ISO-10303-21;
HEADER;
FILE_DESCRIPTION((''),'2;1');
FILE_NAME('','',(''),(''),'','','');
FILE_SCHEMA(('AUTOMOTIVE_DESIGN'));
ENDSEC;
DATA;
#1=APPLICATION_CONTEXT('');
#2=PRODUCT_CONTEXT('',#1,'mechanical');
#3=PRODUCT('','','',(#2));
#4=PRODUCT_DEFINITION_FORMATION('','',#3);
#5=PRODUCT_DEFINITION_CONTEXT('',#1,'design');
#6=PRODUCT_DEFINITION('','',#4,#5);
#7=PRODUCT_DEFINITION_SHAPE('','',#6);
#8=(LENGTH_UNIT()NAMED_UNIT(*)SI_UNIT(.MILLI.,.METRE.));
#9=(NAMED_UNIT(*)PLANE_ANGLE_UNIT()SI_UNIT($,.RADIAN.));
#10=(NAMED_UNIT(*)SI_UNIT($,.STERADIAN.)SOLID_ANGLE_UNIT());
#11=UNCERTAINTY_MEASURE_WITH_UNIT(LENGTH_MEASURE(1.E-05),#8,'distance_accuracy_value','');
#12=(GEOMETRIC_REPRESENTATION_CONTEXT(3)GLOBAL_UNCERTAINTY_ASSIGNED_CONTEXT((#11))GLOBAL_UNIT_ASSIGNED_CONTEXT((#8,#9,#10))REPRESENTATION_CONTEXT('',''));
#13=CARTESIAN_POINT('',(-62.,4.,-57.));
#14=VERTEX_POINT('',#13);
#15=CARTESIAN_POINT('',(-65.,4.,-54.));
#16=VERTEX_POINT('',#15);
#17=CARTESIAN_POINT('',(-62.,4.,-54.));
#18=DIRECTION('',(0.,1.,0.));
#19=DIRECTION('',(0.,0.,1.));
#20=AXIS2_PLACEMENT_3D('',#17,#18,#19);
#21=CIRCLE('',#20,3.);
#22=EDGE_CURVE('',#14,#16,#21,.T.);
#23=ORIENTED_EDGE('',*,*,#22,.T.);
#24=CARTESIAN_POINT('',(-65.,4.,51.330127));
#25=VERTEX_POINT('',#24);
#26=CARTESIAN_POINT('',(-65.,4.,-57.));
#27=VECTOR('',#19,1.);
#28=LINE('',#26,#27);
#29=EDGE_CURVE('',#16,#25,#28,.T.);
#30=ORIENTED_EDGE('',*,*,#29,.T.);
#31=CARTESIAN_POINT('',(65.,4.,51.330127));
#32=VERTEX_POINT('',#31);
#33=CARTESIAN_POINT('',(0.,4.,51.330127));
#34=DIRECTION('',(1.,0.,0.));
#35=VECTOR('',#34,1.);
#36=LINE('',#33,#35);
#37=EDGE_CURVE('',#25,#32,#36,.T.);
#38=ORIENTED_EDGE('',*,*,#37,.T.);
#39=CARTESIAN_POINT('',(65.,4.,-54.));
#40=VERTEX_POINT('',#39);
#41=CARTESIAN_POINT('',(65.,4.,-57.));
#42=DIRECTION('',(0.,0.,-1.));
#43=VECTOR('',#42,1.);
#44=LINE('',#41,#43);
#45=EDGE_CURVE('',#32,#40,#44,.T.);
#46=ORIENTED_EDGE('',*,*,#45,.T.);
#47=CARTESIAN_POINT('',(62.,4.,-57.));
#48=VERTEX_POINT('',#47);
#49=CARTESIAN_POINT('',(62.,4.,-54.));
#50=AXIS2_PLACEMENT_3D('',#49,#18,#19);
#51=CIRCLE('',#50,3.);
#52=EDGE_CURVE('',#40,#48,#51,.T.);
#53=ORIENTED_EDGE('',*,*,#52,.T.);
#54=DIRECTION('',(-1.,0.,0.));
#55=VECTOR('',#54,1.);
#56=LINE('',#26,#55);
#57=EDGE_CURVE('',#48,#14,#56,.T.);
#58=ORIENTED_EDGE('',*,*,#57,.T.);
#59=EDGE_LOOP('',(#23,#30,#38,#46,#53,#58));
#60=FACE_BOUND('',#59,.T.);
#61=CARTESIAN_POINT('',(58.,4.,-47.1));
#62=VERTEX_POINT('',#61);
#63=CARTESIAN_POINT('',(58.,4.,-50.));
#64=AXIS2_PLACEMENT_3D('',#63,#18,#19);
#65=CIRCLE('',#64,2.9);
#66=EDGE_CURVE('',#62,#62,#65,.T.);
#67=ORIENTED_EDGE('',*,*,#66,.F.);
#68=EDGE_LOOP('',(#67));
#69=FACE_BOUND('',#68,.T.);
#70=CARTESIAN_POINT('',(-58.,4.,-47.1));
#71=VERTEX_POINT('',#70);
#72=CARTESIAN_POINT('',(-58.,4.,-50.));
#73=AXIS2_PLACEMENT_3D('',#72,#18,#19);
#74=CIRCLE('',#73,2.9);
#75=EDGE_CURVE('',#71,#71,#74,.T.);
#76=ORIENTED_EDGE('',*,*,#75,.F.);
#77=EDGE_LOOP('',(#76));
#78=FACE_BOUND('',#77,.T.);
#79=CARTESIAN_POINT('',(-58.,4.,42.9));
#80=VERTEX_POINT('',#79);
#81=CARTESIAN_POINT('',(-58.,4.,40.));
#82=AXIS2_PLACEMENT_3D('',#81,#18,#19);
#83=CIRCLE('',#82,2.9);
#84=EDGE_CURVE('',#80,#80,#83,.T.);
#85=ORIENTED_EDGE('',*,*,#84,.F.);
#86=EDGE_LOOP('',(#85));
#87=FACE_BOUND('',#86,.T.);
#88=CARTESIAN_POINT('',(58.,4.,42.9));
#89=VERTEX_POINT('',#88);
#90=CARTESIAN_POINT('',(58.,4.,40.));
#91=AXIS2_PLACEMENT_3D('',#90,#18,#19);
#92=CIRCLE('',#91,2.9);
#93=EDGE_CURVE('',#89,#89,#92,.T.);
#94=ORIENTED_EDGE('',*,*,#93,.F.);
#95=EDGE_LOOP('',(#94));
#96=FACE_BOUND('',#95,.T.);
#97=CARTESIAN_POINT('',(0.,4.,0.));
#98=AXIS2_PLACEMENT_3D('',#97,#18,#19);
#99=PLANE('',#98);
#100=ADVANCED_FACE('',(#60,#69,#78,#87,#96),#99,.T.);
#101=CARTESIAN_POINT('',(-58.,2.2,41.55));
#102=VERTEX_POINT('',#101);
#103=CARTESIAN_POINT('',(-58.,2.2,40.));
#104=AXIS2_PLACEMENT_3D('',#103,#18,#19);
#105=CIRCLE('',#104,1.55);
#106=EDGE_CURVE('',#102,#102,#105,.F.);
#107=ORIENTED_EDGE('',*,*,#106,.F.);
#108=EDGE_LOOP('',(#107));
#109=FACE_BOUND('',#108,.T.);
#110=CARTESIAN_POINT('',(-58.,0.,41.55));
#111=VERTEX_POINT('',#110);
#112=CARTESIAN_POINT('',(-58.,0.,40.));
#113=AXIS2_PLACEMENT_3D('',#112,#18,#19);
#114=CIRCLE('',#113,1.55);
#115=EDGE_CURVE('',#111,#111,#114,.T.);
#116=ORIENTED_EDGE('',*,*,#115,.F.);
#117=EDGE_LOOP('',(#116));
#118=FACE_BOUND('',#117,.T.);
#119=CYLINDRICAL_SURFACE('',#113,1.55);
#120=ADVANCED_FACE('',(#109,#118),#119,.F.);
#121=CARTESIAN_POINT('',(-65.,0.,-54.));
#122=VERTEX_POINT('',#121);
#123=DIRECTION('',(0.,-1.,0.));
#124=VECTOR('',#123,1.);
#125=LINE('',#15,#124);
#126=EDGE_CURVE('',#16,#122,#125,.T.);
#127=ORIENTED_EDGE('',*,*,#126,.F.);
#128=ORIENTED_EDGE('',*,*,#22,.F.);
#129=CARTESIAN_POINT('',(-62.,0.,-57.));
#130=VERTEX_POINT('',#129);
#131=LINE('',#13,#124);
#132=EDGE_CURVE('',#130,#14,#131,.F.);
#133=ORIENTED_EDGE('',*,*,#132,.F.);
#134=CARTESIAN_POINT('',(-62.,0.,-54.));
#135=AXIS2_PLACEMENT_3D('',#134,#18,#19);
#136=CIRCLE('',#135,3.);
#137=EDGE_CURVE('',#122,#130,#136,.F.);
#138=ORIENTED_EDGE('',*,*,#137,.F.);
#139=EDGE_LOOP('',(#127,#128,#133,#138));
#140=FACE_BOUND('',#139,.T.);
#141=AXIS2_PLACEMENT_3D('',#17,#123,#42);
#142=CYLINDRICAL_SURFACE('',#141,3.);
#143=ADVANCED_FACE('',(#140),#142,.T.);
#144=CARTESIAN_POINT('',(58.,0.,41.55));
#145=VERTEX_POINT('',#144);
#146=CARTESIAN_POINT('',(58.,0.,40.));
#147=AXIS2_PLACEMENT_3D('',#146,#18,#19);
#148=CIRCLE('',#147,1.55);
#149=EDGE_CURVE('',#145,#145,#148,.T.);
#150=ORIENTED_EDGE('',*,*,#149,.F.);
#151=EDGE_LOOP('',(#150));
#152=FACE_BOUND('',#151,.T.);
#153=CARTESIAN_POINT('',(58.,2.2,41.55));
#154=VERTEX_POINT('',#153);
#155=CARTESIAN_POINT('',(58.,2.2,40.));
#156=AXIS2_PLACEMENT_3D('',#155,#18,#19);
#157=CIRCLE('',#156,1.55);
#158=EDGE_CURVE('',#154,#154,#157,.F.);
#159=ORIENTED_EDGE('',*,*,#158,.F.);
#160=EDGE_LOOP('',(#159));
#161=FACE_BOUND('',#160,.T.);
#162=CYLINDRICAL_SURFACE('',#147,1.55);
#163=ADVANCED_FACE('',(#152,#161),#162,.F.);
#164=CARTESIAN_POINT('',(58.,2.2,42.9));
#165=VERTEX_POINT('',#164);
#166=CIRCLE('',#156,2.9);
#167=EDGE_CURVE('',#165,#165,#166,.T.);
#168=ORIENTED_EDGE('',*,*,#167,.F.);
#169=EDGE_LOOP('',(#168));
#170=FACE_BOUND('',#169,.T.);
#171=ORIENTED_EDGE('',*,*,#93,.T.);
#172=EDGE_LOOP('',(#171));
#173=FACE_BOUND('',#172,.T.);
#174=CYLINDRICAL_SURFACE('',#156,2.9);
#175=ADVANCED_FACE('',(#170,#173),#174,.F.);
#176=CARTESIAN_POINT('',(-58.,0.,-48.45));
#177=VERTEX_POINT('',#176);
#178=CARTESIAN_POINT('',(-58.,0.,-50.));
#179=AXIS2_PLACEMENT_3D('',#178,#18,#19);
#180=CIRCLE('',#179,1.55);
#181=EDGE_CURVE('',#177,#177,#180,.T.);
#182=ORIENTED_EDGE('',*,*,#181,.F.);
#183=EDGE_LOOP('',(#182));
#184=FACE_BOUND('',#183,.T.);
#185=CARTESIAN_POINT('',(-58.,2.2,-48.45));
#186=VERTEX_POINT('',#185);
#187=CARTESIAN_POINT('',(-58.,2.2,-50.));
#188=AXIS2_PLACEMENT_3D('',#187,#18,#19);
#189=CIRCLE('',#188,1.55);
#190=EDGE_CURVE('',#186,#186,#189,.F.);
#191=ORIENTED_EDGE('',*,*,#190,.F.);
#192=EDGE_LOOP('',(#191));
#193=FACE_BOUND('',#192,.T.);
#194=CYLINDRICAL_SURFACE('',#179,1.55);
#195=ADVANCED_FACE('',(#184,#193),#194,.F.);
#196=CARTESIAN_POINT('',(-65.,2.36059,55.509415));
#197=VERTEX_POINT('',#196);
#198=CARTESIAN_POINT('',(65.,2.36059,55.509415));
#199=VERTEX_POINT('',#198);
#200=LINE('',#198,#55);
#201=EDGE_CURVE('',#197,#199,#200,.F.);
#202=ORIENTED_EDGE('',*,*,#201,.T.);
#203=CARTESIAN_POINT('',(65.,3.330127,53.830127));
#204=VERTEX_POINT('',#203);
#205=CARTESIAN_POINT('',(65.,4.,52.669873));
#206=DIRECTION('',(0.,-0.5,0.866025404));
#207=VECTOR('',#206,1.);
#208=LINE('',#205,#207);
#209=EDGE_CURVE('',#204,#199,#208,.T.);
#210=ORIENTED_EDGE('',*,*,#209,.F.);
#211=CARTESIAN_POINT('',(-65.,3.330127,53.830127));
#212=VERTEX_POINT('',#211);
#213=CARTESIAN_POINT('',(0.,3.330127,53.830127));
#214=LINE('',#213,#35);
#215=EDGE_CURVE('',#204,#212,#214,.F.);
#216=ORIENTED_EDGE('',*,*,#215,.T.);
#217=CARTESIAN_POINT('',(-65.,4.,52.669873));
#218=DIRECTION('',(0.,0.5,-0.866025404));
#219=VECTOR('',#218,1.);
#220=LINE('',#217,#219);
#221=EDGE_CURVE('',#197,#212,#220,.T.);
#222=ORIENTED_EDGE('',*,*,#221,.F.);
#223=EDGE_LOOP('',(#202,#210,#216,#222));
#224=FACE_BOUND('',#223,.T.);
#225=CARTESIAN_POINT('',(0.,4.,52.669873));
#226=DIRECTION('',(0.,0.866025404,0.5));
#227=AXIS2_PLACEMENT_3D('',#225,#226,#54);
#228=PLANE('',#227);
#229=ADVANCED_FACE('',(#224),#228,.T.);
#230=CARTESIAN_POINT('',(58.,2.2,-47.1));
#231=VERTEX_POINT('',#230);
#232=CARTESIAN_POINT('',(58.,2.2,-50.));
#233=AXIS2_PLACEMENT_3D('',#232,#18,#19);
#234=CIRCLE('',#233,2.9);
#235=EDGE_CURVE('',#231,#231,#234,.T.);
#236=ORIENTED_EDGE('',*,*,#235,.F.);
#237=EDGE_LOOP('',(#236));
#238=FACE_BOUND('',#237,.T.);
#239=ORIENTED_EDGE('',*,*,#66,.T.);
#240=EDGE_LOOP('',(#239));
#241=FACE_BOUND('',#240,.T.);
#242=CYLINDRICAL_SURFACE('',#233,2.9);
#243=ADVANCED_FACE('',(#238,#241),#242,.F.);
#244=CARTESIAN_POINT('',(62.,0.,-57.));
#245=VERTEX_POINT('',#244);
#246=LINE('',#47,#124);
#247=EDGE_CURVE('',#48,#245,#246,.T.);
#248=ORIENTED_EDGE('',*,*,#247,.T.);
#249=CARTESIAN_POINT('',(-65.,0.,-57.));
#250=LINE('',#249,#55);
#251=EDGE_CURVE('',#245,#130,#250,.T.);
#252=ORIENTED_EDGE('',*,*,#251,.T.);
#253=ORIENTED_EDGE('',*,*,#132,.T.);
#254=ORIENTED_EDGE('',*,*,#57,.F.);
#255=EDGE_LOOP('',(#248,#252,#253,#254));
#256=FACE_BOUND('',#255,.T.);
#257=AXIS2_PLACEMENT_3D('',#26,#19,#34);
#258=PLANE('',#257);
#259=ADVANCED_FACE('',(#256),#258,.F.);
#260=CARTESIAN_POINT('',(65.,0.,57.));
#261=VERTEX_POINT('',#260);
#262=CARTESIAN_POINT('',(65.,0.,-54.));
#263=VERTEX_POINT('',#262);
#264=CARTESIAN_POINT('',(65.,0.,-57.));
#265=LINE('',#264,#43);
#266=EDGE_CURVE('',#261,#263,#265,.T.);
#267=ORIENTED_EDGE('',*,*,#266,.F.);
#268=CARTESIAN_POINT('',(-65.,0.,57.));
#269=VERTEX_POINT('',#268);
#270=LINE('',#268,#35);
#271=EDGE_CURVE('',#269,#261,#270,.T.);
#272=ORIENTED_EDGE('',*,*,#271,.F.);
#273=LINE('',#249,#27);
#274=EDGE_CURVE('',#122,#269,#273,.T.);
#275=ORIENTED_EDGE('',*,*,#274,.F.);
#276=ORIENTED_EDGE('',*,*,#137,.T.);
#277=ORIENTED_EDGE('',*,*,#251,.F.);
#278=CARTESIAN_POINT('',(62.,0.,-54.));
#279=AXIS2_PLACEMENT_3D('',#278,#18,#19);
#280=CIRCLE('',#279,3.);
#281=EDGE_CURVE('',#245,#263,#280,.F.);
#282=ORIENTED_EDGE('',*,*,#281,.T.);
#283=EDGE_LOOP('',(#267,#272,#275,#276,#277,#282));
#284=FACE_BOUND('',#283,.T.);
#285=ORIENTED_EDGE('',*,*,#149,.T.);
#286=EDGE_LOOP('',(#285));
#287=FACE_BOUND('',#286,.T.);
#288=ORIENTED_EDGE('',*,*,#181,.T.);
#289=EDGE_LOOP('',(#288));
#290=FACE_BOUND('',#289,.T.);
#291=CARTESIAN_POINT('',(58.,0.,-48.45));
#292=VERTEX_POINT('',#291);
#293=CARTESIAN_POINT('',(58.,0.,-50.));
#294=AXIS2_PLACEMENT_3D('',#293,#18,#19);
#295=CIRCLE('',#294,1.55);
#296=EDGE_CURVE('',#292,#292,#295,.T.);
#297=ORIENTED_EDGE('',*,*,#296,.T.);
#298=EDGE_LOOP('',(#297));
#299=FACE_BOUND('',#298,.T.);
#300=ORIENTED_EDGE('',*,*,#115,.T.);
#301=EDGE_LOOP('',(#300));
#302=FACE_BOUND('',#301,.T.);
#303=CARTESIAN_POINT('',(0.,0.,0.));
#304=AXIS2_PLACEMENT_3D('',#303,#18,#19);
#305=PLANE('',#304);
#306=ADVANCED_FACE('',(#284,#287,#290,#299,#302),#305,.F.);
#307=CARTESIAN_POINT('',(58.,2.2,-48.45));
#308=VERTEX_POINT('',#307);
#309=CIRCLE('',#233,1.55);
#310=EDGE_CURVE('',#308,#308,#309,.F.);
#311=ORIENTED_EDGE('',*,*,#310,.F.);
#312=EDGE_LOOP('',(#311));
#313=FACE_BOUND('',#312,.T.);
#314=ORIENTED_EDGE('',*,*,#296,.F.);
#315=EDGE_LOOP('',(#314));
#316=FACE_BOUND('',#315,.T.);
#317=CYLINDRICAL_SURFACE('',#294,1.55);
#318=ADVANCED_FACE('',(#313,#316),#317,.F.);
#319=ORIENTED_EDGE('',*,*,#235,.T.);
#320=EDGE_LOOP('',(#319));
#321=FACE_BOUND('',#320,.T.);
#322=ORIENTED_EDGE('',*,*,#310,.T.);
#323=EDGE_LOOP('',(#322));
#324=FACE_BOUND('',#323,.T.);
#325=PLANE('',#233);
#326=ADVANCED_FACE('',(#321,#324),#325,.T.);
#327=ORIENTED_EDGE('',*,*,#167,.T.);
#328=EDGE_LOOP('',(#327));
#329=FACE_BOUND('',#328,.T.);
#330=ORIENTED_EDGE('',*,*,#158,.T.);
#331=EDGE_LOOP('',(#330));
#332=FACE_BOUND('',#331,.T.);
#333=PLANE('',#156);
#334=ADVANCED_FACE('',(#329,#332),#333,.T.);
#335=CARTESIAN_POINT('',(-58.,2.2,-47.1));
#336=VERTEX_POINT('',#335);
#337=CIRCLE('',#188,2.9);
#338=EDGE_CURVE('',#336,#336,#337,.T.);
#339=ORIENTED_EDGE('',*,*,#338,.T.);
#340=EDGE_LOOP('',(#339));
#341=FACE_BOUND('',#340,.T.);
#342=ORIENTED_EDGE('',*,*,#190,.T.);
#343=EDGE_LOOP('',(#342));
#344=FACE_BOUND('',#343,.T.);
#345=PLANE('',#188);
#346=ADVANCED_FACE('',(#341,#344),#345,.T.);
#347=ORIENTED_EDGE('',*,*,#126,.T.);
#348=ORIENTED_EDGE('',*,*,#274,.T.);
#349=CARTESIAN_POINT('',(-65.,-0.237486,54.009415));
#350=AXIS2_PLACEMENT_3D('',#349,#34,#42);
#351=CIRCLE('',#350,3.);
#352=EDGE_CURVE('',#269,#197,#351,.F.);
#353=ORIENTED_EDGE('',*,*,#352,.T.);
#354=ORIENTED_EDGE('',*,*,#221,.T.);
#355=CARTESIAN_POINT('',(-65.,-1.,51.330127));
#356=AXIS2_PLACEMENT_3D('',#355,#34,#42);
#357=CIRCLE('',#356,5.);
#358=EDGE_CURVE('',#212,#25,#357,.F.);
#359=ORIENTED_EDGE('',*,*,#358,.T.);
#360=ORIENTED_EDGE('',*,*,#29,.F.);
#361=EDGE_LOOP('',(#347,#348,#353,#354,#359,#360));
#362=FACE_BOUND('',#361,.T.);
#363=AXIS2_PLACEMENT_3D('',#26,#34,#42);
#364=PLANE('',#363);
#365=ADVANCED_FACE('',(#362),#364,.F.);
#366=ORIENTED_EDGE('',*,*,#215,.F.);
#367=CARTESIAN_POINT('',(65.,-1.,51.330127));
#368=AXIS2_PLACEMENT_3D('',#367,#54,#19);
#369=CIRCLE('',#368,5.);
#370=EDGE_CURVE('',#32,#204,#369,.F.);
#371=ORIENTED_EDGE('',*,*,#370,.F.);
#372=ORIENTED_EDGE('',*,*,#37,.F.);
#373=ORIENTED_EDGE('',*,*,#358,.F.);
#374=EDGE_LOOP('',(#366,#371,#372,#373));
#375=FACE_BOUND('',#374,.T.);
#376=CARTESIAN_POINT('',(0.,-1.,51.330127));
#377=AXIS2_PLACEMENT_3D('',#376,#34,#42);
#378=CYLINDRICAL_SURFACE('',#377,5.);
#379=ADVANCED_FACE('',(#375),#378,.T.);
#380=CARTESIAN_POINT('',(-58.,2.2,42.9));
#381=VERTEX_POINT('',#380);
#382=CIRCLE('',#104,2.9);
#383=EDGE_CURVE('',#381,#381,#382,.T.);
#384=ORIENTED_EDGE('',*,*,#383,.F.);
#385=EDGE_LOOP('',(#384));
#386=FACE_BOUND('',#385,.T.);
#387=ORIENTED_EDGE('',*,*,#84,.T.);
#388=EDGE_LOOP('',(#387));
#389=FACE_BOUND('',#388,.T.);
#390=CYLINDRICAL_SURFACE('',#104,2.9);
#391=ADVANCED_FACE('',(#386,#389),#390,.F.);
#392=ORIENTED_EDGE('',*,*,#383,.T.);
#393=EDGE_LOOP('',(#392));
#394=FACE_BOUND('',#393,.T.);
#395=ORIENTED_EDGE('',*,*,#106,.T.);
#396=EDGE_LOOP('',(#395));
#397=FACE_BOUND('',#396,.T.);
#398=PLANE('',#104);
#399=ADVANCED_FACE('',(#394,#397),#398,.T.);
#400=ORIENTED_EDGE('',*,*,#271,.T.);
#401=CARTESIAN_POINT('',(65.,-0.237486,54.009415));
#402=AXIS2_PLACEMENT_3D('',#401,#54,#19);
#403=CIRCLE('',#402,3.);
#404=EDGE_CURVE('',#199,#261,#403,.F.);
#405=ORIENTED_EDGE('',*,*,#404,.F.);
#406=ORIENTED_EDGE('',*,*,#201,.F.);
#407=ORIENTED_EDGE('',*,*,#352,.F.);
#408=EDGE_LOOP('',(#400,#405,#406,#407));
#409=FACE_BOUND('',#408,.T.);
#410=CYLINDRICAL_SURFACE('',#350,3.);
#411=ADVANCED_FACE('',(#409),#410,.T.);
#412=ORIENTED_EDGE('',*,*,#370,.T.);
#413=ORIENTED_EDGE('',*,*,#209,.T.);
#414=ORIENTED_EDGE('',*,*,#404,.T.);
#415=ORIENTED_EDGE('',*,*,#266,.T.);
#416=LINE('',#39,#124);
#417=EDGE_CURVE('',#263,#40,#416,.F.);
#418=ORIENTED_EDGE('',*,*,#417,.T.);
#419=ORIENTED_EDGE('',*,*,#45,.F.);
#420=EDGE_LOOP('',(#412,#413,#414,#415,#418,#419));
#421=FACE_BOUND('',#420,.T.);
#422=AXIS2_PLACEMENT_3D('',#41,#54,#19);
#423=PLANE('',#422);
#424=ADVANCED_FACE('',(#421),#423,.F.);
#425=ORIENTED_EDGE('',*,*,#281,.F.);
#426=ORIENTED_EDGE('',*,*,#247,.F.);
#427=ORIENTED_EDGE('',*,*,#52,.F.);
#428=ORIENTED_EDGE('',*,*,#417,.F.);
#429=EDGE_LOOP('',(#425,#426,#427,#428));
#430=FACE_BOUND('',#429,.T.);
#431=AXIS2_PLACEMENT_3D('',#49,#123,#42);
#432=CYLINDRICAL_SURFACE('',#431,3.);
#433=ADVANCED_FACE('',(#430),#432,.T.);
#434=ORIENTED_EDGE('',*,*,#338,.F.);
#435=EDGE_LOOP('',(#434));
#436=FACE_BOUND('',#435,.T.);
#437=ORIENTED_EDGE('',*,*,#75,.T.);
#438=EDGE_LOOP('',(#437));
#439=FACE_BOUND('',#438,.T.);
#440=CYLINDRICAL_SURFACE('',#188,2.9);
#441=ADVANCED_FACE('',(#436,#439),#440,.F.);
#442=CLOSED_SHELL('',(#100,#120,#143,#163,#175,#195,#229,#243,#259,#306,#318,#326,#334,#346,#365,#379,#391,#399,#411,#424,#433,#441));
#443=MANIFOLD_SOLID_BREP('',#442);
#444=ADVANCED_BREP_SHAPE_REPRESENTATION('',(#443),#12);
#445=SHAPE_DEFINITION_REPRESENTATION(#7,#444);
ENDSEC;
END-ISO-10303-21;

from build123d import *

# Parameters (mm, degrees)
SKETCH_1_W                  = 130
SKETCH_1_H                  = 114
EXTRUDE_1_DEPTH             = 4
CHAMFER_1_SIZE              = 2.5
CHAMFER_1_SIZE2             = 4.330127019
FILLET_1_R                  = 5
FILLET_2_R                  = 3
FILLET_3_R                  = 3
SKETCH_2_R                  = 1.55
CUT_EXTRUDE_1_DEPTH         = 87.544786094
PATTERN_LINEAR_1_COUNT      = 2
PATTERN_LINEAR_1_PITCH      = 116
PATTERN_LINEAR_1_COUNT_DIR2 = 2
PATTERN_LINEAR_1_PITCH_DIR2 = 90
SKETCH_4_R                  = 2.9
CUT_EXTRUDE_2_DEPTH         = 1.8
PATTERN_LINEAR_2_COUNT      = 2
PATTERN_LINEAR_2_PITCH      = 116
PATTERN_LINEAR_2_COUNT_DIR2 = 2
PATTERN_LINEAR_2_PITCH_DIR2 = 90


with BuildPart() as part:
    # Эскиз1 → Бобышка-Вытянуть1 (new body)
    with BuildSketch(Plane(origin=(0, 0, 0), x_dir=(1, 0, 0), z_dir=(0, 1, 0))):
        Rectangle(SKETCH_1_W, SKETCH_1_H)
    extrude(amount=EXTRUDE_1_DEPTH)

    # Фаска1
    chamfer_1_edges = [part.edges().sort_by_distance(p)[0] for p in [
        (0, 4, 57),
    ]]
    chamfer_1_side = [part.faces().sort_by_distance(p)[0] for p in [
        (0, 2, 57),
    ]]
    chamfer(chamfer_1_edges, length=CHAMFER_1_SIZE, length2=CHAMFER_1_SIZE2, reference=chamfer_1_side[0])

    # Скругление1
    fillet_1_edges = [part.edges().sort_by_distance(p)[0] for p in [
        (0, 4, 52.669872981),
    ]]
    fillet(fillet_1_edges, radius=FILLET_1_R)

    # Скругление2
    # the kernel refuses this fillet: 3 mm, written as the material it takes off along each edge
    with BuildSketch(Plane(origin=(69.302949009, 1.5, 57), x_dir=(0, 0.4999999999999978, -0.8660254037844398), z_dir=(-1, 0, 0))) as fillet_2_piece_1:
        with BuildLine():
            CenterArc((1.721179604, 3), FILLET_2_R, 214.540406951, 55.459593049)
            Line((-0.75, 1.299038106), (-0.799423592, 1.265018868))
            ThreePointArc((-0.799423592, 1.265018868), (-0.426961524, 0.619519053), (-0.051961524, -0.03))
            Line((-0.051961524, -0.03), (0, -0.06))
            Line((0, -0.06), (1.721179604, -0.06))
            Line((1.721179604, -0.06), (1.721179604, 0))
        make_face()
    extrude(amount=138.605898019, mode=Mode.SUBTRACT)

    # Скругление3
    fillet_3_edges = [part.edges().sort_by_distance(p)[0] for p in [
        (-65, 2, -57),
        (65, 2, -57),
    ]]
    fillet(fillet_3_edges, radius=FILLET_3_R)

    # Эскиз2 → Вырез-Вытянуть1 (cut, through all)
    with BuildSketch(Plane(origin=(0, 4, 0), x_dir=(1, 0, 0), z_dir=(0, 1, 0))):
        with Locations(Location((-58, 50, 0), (0, 0, 270))):
            Circle(SKETCH_2_R)
    cut_extrude_1 = extrude(amount=-CUT_EXTRUDE_1_DEPTH, mode=Mode.SUBTRACT)

    # Линейный массив1: Cut-Extrude 1 2 × 2
    with Locations(*[(i * PATTERN_LINEAR_1_PITCH, 0, j * PATTERN_LINEAR_1_PITCH_DIR2) for i in range(PATTERN_LINEAR_1_COUNT) for j in range(PATTERN_LINEAR_1_COUNT_DIR2) if (i, j) != (0, 0)]):
        add(cut_extrude_1, mode=Mode.SUBTRACT)

    # Эскиз4 → Вырез-Вытянуть2 (cut)
    with BuildSketch(Plane(origin=(0, 4, 0), x_dir=(1, 0, 0), z_dir=(0, 1, 0))):
        with Locations(Location((-58, 50, 0), (0, 0, 270))):
            Circle(SKETCH_4_R)
    cut_extrude_2 = extrude(amount=-CUT_EXTRUDE_2_DEPTH, mode=Mode.SUBTRACT)

    # Линейный массив2: Cut-Extrude 2 2 × 2
    with Locations(*[(i * PATTERN_LINEAR_2_PITCH, 0, j * PATTERN_LINEAR_2_PITCH_DIR2) for i in range(PATTERN_LINEAR_2_COUNT) for j in range(PATTERN_LINEAR_2_COUNT_DIR2) if (i, j) != (0, 0)]):
        add(cut_extrude_2, mode=Mode.SUBTRACT)


solid = part.part
